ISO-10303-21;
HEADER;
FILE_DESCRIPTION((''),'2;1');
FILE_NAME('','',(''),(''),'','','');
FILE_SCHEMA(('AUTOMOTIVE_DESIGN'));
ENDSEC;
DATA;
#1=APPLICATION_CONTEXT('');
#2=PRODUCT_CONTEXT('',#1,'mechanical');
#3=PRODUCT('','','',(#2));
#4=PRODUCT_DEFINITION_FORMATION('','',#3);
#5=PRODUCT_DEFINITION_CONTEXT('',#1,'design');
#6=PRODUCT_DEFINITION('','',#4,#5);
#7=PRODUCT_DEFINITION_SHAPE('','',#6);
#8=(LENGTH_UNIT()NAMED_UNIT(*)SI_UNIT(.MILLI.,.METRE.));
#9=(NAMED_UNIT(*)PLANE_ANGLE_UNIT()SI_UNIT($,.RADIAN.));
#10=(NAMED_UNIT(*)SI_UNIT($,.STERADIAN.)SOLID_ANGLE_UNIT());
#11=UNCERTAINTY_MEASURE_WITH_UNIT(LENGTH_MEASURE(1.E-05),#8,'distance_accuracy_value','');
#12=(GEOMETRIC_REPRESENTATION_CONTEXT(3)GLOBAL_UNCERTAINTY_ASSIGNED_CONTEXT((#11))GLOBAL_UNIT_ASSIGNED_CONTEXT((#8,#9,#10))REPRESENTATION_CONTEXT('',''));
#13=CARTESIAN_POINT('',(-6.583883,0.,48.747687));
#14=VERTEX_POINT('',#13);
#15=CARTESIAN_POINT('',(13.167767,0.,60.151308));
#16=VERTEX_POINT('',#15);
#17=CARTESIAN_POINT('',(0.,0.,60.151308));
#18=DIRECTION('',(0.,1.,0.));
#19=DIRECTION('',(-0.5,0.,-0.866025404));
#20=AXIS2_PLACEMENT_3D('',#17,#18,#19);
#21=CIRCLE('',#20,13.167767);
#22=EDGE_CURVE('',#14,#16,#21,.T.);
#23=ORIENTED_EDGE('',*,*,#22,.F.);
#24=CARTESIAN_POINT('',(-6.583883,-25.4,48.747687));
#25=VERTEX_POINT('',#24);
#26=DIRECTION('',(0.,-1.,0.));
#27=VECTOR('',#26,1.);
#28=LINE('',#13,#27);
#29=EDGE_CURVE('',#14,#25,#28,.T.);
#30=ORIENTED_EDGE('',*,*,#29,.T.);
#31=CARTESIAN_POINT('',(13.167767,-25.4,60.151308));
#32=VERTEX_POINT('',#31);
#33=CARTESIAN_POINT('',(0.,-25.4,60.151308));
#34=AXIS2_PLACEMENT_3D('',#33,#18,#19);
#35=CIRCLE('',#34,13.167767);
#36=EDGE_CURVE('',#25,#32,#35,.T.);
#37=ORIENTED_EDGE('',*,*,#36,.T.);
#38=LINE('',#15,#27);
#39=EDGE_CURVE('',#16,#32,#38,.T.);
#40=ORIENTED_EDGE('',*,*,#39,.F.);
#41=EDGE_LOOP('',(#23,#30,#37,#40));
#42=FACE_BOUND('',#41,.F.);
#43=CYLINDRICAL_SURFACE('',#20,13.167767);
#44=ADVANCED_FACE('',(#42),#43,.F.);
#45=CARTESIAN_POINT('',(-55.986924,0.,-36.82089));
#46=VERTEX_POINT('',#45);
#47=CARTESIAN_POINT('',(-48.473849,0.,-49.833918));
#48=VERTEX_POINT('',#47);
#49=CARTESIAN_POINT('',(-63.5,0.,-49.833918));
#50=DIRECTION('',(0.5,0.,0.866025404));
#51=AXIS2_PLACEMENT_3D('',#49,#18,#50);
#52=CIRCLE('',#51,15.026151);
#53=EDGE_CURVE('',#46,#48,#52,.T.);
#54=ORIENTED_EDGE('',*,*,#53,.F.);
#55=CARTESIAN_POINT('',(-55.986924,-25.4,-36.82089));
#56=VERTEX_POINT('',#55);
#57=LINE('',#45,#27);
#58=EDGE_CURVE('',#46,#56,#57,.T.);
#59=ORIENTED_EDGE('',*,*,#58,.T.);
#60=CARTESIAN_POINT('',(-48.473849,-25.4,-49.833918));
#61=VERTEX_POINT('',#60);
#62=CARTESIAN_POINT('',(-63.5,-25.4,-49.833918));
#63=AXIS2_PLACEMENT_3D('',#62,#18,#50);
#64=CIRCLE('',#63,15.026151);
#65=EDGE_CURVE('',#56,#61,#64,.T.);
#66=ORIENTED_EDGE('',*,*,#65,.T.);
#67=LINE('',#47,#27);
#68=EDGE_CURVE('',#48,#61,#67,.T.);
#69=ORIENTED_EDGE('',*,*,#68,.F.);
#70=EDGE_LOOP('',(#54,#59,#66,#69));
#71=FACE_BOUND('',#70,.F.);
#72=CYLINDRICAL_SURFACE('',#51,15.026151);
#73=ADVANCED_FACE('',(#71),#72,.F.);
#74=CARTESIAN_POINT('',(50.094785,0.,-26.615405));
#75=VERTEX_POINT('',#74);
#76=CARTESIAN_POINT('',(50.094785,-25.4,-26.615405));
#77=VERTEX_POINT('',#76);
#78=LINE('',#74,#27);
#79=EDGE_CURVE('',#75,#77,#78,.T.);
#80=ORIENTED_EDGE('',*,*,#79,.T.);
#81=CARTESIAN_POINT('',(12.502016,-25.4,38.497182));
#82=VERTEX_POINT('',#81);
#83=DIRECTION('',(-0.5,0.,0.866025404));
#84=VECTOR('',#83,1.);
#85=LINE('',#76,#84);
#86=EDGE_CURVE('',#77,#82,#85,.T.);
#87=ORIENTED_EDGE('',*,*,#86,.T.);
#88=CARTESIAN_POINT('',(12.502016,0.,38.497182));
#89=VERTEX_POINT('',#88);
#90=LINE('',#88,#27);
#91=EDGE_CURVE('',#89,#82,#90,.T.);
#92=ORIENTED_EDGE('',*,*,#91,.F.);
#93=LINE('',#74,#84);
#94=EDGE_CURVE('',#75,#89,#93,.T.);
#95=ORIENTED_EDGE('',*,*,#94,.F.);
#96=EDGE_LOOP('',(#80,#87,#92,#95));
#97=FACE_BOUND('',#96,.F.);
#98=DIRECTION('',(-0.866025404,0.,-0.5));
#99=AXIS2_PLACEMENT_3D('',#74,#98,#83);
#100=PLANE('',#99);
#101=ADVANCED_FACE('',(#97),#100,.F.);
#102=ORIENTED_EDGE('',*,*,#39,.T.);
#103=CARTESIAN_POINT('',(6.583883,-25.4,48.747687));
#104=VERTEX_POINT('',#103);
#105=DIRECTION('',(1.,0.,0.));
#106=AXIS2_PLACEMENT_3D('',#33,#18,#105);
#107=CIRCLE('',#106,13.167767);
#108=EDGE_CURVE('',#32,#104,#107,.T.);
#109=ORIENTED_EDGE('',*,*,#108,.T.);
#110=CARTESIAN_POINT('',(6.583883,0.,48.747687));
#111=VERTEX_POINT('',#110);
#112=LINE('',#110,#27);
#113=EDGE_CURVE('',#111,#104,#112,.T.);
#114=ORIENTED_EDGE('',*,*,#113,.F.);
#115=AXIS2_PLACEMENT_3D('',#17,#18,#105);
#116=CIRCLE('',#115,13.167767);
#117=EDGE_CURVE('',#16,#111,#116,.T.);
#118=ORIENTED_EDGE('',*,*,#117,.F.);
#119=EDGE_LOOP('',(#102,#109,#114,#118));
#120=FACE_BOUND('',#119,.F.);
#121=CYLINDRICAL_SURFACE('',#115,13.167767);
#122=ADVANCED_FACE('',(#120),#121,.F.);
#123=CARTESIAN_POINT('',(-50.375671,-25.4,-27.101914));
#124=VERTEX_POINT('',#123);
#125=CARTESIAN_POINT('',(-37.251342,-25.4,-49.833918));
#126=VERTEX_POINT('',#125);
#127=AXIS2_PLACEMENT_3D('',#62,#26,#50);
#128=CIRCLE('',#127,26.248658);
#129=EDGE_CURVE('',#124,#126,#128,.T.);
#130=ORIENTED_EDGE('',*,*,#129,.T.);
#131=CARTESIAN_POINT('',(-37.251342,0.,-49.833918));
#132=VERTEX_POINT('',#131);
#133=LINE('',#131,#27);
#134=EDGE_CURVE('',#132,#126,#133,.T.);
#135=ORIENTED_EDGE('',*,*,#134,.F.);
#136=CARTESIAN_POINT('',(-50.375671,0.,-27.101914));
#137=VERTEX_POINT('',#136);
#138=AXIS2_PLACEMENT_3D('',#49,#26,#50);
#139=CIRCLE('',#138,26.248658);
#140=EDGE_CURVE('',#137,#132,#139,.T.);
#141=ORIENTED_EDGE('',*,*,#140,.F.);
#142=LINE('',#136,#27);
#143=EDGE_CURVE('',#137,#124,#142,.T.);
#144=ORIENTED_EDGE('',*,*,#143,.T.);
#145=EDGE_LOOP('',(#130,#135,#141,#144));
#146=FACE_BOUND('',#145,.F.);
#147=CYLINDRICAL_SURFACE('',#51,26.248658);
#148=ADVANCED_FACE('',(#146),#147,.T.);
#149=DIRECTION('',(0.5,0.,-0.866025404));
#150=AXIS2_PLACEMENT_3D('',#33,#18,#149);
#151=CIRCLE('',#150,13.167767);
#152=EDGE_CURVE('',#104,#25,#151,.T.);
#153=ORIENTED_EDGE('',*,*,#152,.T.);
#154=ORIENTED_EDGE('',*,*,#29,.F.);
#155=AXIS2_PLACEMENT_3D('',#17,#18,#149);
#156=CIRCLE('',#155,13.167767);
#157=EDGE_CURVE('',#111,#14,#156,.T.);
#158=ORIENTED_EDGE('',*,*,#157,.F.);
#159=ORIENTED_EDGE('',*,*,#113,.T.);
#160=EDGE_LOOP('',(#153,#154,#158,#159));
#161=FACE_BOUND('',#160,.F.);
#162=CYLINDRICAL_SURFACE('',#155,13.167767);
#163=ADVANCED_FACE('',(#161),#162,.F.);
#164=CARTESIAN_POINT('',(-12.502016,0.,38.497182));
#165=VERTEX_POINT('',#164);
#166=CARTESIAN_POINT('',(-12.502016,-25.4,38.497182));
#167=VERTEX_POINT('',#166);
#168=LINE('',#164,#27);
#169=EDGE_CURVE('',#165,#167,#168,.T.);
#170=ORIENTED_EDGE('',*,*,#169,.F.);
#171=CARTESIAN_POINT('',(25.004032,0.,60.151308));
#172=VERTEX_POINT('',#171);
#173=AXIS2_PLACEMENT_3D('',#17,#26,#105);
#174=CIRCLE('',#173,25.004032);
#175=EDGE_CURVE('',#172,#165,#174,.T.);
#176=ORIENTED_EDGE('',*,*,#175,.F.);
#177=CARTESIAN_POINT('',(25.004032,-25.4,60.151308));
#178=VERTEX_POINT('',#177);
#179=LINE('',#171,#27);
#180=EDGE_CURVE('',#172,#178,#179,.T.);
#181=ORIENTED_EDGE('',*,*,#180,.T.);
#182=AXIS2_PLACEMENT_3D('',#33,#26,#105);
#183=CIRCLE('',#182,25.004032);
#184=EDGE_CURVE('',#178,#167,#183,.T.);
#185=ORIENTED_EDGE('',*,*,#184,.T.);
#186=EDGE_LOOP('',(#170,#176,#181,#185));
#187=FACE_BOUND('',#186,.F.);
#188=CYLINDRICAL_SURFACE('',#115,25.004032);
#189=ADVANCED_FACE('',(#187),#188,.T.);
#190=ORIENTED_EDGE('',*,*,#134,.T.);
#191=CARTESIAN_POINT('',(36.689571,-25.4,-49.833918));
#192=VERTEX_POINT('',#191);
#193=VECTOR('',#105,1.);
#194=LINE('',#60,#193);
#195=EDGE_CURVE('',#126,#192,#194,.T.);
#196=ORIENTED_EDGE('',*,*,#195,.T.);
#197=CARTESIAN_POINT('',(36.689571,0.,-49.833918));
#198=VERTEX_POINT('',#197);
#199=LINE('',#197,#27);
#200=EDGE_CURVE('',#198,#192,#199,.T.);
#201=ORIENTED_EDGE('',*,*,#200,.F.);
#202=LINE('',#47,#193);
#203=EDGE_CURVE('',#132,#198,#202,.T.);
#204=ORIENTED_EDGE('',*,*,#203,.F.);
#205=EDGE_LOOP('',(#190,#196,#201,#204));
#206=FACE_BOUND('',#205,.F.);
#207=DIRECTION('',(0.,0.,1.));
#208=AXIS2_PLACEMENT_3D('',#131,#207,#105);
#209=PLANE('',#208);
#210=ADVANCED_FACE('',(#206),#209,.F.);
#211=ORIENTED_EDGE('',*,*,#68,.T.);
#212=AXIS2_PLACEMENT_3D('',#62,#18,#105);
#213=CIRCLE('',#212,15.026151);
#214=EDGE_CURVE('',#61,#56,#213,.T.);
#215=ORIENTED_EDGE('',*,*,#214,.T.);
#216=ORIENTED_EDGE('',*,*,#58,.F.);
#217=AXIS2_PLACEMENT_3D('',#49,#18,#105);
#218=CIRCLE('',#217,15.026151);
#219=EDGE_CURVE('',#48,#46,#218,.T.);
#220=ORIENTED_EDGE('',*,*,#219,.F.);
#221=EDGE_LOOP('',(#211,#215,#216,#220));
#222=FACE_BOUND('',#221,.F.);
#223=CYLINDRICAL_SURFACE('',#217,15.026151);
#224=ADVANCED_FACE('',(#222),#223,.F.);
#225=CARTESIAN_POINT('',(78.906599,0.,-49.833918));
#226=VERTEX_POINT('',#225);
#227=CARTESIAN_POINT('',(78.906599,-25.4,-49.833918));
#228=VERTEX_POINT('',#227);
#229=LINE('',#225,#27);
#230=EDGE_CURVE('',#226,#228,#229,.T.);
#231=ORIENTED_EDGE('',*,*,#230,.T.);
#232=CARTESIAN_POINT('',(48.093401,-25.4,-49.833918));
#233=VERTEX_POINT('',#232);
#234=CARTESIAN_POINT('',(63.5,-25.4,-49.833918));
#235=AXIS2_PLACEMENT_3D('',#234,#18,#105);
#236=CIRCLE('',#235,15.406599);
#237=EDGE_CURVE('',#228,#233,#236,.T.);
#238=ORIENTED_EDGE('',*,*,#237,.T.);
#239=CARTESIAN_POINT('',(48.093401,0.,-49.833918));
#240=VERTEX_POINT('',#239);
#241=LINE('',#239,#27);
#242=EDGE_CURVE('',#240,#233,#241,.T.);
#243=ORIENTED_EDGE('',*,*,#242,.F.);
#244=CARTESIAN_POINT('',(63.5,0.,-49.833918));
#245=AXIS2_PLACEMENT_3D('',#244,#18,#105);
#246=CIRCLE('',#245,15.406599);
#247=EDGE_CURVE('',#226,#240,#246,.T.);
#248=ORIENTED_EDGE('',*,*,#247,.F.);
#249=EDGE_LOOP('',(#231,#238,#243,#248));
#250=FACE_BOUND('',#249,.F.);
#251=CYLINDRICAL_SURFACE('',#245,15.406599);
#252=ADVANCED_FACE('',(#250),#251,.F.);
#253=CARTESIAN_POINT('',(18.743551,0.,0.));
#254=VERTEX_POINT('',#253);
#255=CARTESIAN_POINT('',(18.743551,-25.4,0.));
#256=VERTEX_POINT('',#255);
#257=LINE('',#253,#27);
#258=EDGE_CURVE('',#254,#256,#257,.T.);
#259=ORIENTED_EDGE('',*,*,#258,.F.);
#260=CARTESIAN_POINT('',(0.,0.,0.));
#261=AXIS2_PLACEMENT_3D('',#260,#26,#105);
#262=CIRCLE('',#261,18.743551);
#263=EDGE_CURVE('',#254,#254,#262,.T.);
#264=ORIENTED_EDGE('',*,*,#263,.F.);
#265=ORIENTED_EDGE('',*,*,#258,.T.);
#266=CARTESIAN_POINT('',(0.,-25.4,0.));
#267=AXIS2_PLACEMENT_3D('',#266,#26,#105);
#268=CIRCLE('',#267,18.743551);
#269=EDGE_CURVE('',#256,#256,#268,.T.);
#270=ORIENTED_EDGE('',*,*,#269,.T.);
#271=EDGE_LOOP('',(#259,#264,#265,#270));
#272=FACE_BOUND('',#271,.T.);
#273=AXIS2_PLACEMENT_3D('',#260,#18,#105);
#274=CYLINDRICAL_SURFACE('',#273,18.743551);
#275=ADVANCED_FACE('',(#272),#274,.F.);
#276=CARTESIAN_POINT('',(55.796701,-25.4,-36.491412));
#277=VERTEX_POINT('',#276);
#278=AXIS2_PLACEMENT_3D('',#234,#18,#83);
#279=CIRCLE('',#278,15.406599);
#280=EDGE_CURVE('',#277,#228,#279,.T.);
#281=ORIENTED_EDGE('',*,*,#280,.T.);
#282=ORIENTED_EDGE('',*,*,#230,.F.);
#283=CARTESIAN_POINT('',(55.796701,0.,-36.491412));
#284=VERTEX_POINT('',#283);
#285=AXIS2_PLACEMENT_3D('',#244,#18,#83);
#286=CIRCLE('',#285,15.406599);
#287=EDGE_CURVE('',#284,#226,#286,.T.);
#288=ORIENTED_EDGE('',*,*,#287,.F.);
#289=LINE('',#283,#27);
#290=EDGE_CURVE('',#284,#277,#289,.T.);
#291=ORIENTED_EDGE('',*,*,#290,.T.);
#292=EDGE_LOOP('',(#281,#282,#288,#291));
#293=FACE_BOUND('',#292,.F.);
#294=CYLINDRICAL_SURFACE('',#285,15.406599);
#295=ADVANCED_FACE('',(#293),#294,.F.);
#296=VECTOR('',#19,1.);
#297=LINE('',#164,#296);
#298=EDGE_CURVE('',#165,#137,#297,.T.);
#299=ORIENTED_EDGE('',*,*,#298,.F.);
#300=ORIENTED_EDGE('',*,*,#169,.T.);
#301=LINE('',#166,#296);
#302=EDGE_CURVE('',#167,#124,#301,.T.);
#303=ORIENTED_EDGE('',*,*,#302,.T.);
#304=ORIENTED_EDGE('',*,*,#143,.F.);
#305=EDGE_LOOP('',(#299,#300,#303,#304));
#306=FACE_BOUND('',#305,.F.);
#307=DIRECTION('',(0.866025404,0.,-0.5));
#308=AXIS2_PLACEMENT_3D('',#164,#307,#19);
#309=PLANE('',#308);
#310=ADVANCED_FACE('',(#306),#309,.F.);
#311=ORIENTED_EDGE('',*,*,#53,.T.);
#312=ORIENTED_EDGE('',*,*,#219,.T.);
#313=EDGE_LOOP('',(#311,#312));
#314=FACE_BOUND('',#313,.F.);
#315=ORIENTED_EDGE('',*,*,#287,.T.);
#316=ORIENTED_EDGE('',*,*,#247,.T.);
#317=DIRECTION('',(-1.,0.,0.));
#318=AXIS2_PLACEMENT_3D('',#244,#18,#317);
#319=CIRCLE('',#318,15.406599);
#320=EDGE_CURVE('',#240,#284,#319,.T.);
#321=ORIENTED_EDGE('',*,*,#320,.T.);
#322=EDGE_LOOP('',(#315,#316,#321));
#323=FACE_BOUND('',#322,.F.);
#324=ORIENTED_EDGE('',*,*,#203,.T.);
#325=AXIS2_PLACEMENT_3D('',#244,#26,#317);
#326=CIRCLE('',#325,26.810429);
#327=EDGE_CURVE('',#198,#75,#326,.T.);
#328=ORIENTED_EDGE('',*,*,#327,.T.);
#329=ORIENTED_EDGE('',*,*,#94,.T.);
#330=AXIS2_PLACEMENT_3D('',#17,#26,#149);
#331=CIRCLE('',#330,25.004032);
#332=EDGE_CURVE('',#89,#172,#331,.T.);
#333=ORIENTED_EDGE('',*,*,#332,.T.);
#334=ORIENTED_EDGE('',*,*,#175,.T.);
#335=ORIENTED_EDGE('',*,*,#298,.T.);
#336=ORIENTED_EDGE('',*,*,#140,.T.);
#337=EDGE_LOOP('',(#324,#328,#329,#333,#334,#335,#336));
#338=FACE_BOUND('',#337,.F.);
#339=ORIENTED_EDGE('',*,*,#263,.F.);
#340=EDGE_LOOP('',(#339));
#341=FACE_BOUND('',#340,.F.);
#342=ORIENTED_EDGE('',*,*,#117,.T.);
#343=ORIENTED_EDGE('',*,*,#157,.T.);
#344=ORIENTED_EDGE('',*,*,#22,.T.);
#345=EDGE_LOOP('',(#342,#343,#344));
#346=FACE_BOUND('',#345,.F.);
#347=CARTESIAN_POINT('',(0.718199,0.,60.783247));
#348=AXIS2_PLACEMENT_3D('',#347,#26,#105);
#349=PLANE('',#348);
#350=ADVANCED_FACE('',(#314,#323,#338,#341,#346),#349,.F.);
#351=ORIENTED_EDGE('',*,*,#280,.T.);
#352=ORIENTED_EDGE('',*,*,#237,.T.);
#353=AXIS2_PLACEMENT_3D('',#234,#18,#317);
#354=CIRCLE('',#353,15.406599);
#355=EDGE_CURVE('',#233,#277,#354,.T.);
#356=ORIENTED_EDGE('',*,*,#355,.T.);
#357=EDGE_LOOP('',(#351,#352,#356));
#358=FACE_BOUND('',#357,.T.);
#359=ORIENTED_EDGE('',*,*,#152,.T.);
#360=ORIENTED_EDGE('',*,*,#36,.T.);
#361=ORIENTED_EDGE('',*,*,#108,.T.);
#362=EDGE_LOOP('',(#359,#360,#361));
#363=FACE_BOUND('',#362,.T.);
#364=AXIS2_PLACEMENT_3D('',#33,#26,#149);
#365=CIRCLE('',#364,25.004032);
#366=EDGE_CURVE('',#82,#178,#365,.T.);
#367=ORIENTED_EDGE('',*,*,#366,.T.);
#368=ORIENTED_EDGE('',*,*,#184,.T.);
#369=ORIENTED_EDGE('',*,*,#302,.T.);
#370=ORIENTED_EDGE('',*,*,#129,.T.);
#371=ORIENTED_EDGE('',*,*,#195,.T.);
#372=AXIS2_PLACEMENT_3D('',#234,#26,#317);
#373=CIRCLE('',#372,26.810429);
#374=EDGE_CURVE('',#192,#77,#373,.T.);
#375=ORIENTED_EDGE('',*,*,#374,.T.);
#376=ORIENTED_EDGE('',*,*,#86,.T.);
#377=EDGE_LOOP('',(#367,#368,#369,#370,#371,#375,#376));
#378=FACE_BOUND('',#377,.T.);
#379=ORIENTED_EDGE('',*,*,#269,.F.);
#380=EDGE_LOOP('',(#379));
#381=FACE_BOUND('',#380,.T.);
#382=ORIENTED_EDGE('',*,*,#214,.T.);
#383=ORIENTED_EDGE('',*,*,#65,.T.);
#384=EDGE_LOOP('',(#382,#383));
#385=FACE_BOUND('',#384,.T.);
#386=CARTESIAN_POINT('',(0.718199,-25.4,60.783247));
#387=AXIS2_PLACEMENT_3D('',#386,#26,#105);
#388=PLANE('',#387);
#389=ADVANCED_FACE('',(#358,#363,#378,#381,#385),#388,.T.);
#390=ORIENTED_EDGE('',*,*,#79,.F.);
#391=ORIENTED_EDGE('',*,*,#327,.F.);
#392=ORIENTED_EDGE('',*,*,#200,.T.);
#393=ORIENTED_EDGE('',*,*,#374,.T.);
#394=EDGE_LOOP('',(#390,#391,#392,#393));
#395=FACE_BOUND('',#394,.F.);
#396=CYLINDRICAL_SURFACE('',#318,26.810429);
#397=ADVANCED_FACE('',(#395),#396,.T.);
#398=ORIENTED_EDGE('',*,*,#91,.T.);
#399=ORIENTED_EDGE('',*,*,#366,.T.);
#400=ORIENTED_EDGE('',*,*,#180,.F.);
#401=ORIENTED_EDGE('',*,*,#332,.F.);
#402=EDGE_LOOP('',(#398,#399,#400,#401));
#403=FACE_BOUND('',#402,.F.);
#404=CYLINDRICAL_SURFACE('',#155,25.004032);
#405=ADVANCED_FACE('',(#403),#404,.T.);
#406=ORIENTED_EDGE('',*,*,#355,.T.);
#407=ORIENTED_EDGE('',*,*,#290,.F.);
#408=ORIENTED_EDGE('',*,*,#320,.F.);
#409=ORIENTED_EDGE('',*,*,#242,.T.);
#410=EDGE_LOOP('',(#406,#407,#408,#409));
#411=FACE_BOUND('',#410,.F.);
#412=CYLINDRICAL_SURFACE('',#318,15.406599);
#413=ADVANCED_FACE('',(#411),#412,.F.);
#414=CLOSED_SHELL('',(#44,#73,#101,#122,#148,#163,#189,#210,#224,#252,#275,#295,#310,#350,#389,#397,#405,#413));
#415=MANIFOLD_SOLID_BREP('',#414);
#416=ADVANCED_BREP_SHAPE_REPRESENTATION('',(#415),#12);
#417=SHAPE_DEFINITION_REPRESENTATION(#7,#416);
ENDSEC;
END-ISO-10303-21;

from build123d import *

# Parameters (mm, degrees)
F0_R     = 18.7435509256
F1_DEPTH = 25.4


with BuildPart() as f1:
    # F0 (on Front) → F1 (new body)
    with BuildSketch(Plane.XZ):
        with BuildLine():
            Line((-12.5020157932, 38.4971815486), (-6.5838834434, 48.7476874643))
            ThreePointArc((-6.5838834434, 48.7476874643), (-6.5838834434, 71.5549287346), (13.1677668869, 60.1513080994))
            ThreePointArc((13.1677668869, 60.1513080994), (11.4036206351, 53.567424656), (6.5838834434, 48.7476874643))
            Line((6.5838834434, 48.7476874643), (12.5020157932, 38.4971815486))
            ThreePointArc((12.5020157932, 38.4971815486), (21.6541265509, 47.6492923062), (25.0040315864, 60.1513080994))
            ThreePointArc((25.0040315864, 60.1513080994), (-12.5020157932, 81.8054346503), (-12.5020157932, 38.4971815486))
        make_face()
        with BuildLine():
            ThreePointArc((6.5838834434, 48.7476874643), (0, 46.9835412126), (-6.5838834434, 48.7476874643))
            Line((-6.5838834434, 48.7476874643), (-12.5020157932, 38.4971815486))
            ThreePointArc((-12.5020157932, 38.4971815486), (0, 35.147276513), (12.5020157932, 38.4971815486))
            Line((12.5020157932, 38.4971815486), (6.5838834434, 48.7476874643))
        make_face()
        with BuildLine():
            ThreePointArc((12.5020157932, 38.4971815486), (0, 35.147276513), (-12.5020157932, 38.4971815486))
            Line((-12.5020157932, 38.4971815486), (-50.3756712224, -27.1019139232))
            ThreePointArc((-50.3756712224, -27.1019139232), (-40.767995742, -36.7095894036), (-37.2513424448, -49.8339181812))
            Line((-37.2513424448, -49.8339181812), (36.6895705679, -49.8339181812))
            ThreePointArc((36.6895705679, -49.8339181812), (40.2814870254, -36.4287034651), (50.094785284, -26.6154052066))
            Line((50.094785284, -26.6154052066), (12.5020157932, 38.4971815486))
        make_face()
        Circle(F0_R, mode=Mode.SUBTRACT)
        with BuildLine():
            Line((55.796700688, -36.491412387), (50.094785284, -26.6154052066))
            ThreePointArc((50.094785284, -26.6154052066), (40.2814870254, -36.4287034651), (36.6895705679, -49.8339181812))
            Line((36.6895705679, -49.8339181812), (48.0934013761, -49.8339181812))
            ThreePointArc((48.0934013761, -49.8339181812), (50.1574942058, -42.1306188692), (55.796700688, -36.491412387))
        make_face()
        with BuildLine():
            ThreePointArc((90.3104294321, -49.8339181812), (76.905214716, -26.6154052066), (50.094785284, -26.6154052066))
            Line((50.094785284, -26.6154052066), (55.796700688, -36.491412387))
            ThreePointArc((55.796700688, -36.491412387), (71.203299312, -36.491412387), (78.9065986239, -49.8339181812))
            ThreePointArc((78.9065986239, -49.8339181812), (63.5, -65.2405168051), (48.0934013761, -49.8339181812))
            Line((48.0934013761, -49.8339181812), (36.6895705679, -49.8339181812))
            ThreePointArc((36.6895705679, -49.8339181812), (63.5, -76.6443476133), (90.3104294321, -49.8339181812))
        make_face()
        with BuildLine():
            ThreePointArc((-37.2513424448, -49.8339181812), (-40.767995742, -36.7095894036), (-50.3756712224, -27.1019139232))
            Line((-50.3756712224, -27.1019139232), (-55.9869244457, -36.8208896001))
            ThreePointArc((-55.9869244457, -36.8208896001), (-50.4869714189, -42.3208426269), (-48.4738488914, -49.8339181812))
            Line((-48.4738488914, -49.8339181812), (-37.2513424448, -49.8339181812))
        make_face()
        with BuildLine():
            Line((-55.9869244457, -36.8208896001), (-50.3756712224, -27.1019139232))
            ThreePointArc((-50.3756712224, -27.1019139232), (-86.232004258, -62.9582469588), (-37.2513424448, -49.8339181812))
            Line((-37.2513424448, -49.8339181812), (-48.4738488914, -49.8339181812))
            ThreePointArc((-48.4738488914, -49.8339181812), (-76.5130285811, -57.3469937355), (-55.9869244457, -36.8208896001))
        make_face()
    extrude(amount=F1_DEPTH)


solid = f1.part
